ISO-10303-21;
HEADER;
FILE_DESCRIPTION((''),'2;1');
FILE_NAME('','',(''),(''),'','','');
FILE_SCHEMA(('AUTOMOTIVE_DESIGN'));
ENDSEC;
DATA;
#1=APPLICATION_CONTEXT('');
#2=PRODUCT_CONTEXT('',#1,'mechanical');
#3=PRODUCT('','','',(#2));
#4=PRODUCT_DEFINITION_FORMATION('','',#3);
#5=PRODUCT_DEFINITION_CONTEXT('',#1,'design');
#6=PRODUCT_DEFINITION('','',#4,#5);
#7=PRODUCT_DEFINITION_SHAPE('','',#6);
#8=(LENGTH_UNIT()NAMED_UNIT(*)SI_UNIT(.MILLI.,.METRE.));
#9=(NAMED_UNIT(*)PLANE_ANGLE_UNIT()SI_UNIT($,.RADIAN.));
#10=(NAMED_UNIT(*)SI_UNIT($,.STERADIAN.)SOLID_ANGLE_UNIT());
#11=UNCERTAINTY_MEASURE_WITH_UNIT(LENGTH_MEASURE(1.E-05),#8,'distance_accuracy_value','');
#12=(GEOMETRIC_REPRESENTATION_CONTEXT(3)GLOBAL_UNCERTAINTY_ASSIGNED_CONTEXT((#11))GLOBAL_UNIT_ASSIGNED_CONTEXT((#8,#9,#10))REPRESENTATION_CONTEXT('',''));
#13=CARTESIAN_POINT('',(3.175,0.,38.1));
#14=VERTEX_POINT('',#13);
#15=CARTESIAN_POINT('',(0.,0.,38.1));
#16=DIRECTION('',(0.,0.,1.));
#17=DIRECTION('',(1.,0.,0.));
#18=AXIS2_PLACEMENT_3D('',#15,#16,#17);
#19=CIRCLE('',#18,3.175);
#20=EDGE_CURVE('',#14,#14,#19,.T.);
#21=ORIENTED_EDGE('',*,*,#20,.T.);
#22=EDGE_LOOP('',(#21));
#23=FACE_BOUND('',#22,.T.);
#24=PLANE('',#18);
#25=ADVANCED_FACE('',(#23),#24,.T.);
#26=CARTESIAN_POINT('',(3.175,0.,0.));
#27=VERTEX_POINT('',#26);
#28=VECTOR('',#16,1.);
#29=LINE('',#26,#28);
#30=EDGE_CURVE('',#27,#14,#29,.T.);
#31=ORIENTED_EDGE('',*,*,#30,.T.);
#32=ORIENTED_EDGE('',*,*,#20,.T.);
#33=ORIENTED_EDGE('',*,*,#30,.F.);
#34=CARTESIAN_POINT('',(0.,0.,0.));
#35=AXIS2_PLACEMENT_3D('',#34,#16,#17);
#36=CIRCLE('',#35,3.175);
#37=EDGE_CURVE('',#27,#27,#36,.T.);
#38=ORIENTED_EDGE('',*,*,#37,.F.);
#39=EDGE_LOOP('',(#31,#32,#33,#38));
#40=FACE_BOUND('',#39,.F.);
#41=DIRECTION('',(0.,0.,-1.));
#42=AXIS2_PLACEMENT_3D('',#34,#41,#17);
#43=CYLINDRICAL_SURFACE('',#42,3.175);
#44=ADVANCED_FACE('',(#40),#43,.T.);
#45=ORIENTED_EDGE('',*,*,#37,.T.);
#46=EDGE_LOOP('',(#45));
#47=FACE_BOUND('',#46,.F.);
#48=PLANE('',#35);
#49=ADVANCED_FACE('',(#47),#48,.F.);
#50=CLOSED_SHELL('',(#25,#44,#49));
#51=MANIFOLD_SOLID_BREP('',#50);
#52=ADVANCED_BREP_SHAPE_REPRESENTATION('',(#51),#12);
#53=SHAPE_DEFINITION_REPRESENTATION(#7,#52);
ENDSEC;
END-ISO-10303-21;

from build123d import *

# Parameters (mm, degrees)
F1_R     = 3.175
F2_DEPTH = 38.1


# Not quite as in the source:
# - a variable given as a bare number and used for a length is read in inches; the dataset says mm whatever the document's units were


with BuildPart() as f2:
    # F1 (on Top) → F2 (new body)
    with BuildSketch(Plane.XY):
        Circle(F1_R)
    extrude(amount=F2_DEPTH)


solid = f2.part
